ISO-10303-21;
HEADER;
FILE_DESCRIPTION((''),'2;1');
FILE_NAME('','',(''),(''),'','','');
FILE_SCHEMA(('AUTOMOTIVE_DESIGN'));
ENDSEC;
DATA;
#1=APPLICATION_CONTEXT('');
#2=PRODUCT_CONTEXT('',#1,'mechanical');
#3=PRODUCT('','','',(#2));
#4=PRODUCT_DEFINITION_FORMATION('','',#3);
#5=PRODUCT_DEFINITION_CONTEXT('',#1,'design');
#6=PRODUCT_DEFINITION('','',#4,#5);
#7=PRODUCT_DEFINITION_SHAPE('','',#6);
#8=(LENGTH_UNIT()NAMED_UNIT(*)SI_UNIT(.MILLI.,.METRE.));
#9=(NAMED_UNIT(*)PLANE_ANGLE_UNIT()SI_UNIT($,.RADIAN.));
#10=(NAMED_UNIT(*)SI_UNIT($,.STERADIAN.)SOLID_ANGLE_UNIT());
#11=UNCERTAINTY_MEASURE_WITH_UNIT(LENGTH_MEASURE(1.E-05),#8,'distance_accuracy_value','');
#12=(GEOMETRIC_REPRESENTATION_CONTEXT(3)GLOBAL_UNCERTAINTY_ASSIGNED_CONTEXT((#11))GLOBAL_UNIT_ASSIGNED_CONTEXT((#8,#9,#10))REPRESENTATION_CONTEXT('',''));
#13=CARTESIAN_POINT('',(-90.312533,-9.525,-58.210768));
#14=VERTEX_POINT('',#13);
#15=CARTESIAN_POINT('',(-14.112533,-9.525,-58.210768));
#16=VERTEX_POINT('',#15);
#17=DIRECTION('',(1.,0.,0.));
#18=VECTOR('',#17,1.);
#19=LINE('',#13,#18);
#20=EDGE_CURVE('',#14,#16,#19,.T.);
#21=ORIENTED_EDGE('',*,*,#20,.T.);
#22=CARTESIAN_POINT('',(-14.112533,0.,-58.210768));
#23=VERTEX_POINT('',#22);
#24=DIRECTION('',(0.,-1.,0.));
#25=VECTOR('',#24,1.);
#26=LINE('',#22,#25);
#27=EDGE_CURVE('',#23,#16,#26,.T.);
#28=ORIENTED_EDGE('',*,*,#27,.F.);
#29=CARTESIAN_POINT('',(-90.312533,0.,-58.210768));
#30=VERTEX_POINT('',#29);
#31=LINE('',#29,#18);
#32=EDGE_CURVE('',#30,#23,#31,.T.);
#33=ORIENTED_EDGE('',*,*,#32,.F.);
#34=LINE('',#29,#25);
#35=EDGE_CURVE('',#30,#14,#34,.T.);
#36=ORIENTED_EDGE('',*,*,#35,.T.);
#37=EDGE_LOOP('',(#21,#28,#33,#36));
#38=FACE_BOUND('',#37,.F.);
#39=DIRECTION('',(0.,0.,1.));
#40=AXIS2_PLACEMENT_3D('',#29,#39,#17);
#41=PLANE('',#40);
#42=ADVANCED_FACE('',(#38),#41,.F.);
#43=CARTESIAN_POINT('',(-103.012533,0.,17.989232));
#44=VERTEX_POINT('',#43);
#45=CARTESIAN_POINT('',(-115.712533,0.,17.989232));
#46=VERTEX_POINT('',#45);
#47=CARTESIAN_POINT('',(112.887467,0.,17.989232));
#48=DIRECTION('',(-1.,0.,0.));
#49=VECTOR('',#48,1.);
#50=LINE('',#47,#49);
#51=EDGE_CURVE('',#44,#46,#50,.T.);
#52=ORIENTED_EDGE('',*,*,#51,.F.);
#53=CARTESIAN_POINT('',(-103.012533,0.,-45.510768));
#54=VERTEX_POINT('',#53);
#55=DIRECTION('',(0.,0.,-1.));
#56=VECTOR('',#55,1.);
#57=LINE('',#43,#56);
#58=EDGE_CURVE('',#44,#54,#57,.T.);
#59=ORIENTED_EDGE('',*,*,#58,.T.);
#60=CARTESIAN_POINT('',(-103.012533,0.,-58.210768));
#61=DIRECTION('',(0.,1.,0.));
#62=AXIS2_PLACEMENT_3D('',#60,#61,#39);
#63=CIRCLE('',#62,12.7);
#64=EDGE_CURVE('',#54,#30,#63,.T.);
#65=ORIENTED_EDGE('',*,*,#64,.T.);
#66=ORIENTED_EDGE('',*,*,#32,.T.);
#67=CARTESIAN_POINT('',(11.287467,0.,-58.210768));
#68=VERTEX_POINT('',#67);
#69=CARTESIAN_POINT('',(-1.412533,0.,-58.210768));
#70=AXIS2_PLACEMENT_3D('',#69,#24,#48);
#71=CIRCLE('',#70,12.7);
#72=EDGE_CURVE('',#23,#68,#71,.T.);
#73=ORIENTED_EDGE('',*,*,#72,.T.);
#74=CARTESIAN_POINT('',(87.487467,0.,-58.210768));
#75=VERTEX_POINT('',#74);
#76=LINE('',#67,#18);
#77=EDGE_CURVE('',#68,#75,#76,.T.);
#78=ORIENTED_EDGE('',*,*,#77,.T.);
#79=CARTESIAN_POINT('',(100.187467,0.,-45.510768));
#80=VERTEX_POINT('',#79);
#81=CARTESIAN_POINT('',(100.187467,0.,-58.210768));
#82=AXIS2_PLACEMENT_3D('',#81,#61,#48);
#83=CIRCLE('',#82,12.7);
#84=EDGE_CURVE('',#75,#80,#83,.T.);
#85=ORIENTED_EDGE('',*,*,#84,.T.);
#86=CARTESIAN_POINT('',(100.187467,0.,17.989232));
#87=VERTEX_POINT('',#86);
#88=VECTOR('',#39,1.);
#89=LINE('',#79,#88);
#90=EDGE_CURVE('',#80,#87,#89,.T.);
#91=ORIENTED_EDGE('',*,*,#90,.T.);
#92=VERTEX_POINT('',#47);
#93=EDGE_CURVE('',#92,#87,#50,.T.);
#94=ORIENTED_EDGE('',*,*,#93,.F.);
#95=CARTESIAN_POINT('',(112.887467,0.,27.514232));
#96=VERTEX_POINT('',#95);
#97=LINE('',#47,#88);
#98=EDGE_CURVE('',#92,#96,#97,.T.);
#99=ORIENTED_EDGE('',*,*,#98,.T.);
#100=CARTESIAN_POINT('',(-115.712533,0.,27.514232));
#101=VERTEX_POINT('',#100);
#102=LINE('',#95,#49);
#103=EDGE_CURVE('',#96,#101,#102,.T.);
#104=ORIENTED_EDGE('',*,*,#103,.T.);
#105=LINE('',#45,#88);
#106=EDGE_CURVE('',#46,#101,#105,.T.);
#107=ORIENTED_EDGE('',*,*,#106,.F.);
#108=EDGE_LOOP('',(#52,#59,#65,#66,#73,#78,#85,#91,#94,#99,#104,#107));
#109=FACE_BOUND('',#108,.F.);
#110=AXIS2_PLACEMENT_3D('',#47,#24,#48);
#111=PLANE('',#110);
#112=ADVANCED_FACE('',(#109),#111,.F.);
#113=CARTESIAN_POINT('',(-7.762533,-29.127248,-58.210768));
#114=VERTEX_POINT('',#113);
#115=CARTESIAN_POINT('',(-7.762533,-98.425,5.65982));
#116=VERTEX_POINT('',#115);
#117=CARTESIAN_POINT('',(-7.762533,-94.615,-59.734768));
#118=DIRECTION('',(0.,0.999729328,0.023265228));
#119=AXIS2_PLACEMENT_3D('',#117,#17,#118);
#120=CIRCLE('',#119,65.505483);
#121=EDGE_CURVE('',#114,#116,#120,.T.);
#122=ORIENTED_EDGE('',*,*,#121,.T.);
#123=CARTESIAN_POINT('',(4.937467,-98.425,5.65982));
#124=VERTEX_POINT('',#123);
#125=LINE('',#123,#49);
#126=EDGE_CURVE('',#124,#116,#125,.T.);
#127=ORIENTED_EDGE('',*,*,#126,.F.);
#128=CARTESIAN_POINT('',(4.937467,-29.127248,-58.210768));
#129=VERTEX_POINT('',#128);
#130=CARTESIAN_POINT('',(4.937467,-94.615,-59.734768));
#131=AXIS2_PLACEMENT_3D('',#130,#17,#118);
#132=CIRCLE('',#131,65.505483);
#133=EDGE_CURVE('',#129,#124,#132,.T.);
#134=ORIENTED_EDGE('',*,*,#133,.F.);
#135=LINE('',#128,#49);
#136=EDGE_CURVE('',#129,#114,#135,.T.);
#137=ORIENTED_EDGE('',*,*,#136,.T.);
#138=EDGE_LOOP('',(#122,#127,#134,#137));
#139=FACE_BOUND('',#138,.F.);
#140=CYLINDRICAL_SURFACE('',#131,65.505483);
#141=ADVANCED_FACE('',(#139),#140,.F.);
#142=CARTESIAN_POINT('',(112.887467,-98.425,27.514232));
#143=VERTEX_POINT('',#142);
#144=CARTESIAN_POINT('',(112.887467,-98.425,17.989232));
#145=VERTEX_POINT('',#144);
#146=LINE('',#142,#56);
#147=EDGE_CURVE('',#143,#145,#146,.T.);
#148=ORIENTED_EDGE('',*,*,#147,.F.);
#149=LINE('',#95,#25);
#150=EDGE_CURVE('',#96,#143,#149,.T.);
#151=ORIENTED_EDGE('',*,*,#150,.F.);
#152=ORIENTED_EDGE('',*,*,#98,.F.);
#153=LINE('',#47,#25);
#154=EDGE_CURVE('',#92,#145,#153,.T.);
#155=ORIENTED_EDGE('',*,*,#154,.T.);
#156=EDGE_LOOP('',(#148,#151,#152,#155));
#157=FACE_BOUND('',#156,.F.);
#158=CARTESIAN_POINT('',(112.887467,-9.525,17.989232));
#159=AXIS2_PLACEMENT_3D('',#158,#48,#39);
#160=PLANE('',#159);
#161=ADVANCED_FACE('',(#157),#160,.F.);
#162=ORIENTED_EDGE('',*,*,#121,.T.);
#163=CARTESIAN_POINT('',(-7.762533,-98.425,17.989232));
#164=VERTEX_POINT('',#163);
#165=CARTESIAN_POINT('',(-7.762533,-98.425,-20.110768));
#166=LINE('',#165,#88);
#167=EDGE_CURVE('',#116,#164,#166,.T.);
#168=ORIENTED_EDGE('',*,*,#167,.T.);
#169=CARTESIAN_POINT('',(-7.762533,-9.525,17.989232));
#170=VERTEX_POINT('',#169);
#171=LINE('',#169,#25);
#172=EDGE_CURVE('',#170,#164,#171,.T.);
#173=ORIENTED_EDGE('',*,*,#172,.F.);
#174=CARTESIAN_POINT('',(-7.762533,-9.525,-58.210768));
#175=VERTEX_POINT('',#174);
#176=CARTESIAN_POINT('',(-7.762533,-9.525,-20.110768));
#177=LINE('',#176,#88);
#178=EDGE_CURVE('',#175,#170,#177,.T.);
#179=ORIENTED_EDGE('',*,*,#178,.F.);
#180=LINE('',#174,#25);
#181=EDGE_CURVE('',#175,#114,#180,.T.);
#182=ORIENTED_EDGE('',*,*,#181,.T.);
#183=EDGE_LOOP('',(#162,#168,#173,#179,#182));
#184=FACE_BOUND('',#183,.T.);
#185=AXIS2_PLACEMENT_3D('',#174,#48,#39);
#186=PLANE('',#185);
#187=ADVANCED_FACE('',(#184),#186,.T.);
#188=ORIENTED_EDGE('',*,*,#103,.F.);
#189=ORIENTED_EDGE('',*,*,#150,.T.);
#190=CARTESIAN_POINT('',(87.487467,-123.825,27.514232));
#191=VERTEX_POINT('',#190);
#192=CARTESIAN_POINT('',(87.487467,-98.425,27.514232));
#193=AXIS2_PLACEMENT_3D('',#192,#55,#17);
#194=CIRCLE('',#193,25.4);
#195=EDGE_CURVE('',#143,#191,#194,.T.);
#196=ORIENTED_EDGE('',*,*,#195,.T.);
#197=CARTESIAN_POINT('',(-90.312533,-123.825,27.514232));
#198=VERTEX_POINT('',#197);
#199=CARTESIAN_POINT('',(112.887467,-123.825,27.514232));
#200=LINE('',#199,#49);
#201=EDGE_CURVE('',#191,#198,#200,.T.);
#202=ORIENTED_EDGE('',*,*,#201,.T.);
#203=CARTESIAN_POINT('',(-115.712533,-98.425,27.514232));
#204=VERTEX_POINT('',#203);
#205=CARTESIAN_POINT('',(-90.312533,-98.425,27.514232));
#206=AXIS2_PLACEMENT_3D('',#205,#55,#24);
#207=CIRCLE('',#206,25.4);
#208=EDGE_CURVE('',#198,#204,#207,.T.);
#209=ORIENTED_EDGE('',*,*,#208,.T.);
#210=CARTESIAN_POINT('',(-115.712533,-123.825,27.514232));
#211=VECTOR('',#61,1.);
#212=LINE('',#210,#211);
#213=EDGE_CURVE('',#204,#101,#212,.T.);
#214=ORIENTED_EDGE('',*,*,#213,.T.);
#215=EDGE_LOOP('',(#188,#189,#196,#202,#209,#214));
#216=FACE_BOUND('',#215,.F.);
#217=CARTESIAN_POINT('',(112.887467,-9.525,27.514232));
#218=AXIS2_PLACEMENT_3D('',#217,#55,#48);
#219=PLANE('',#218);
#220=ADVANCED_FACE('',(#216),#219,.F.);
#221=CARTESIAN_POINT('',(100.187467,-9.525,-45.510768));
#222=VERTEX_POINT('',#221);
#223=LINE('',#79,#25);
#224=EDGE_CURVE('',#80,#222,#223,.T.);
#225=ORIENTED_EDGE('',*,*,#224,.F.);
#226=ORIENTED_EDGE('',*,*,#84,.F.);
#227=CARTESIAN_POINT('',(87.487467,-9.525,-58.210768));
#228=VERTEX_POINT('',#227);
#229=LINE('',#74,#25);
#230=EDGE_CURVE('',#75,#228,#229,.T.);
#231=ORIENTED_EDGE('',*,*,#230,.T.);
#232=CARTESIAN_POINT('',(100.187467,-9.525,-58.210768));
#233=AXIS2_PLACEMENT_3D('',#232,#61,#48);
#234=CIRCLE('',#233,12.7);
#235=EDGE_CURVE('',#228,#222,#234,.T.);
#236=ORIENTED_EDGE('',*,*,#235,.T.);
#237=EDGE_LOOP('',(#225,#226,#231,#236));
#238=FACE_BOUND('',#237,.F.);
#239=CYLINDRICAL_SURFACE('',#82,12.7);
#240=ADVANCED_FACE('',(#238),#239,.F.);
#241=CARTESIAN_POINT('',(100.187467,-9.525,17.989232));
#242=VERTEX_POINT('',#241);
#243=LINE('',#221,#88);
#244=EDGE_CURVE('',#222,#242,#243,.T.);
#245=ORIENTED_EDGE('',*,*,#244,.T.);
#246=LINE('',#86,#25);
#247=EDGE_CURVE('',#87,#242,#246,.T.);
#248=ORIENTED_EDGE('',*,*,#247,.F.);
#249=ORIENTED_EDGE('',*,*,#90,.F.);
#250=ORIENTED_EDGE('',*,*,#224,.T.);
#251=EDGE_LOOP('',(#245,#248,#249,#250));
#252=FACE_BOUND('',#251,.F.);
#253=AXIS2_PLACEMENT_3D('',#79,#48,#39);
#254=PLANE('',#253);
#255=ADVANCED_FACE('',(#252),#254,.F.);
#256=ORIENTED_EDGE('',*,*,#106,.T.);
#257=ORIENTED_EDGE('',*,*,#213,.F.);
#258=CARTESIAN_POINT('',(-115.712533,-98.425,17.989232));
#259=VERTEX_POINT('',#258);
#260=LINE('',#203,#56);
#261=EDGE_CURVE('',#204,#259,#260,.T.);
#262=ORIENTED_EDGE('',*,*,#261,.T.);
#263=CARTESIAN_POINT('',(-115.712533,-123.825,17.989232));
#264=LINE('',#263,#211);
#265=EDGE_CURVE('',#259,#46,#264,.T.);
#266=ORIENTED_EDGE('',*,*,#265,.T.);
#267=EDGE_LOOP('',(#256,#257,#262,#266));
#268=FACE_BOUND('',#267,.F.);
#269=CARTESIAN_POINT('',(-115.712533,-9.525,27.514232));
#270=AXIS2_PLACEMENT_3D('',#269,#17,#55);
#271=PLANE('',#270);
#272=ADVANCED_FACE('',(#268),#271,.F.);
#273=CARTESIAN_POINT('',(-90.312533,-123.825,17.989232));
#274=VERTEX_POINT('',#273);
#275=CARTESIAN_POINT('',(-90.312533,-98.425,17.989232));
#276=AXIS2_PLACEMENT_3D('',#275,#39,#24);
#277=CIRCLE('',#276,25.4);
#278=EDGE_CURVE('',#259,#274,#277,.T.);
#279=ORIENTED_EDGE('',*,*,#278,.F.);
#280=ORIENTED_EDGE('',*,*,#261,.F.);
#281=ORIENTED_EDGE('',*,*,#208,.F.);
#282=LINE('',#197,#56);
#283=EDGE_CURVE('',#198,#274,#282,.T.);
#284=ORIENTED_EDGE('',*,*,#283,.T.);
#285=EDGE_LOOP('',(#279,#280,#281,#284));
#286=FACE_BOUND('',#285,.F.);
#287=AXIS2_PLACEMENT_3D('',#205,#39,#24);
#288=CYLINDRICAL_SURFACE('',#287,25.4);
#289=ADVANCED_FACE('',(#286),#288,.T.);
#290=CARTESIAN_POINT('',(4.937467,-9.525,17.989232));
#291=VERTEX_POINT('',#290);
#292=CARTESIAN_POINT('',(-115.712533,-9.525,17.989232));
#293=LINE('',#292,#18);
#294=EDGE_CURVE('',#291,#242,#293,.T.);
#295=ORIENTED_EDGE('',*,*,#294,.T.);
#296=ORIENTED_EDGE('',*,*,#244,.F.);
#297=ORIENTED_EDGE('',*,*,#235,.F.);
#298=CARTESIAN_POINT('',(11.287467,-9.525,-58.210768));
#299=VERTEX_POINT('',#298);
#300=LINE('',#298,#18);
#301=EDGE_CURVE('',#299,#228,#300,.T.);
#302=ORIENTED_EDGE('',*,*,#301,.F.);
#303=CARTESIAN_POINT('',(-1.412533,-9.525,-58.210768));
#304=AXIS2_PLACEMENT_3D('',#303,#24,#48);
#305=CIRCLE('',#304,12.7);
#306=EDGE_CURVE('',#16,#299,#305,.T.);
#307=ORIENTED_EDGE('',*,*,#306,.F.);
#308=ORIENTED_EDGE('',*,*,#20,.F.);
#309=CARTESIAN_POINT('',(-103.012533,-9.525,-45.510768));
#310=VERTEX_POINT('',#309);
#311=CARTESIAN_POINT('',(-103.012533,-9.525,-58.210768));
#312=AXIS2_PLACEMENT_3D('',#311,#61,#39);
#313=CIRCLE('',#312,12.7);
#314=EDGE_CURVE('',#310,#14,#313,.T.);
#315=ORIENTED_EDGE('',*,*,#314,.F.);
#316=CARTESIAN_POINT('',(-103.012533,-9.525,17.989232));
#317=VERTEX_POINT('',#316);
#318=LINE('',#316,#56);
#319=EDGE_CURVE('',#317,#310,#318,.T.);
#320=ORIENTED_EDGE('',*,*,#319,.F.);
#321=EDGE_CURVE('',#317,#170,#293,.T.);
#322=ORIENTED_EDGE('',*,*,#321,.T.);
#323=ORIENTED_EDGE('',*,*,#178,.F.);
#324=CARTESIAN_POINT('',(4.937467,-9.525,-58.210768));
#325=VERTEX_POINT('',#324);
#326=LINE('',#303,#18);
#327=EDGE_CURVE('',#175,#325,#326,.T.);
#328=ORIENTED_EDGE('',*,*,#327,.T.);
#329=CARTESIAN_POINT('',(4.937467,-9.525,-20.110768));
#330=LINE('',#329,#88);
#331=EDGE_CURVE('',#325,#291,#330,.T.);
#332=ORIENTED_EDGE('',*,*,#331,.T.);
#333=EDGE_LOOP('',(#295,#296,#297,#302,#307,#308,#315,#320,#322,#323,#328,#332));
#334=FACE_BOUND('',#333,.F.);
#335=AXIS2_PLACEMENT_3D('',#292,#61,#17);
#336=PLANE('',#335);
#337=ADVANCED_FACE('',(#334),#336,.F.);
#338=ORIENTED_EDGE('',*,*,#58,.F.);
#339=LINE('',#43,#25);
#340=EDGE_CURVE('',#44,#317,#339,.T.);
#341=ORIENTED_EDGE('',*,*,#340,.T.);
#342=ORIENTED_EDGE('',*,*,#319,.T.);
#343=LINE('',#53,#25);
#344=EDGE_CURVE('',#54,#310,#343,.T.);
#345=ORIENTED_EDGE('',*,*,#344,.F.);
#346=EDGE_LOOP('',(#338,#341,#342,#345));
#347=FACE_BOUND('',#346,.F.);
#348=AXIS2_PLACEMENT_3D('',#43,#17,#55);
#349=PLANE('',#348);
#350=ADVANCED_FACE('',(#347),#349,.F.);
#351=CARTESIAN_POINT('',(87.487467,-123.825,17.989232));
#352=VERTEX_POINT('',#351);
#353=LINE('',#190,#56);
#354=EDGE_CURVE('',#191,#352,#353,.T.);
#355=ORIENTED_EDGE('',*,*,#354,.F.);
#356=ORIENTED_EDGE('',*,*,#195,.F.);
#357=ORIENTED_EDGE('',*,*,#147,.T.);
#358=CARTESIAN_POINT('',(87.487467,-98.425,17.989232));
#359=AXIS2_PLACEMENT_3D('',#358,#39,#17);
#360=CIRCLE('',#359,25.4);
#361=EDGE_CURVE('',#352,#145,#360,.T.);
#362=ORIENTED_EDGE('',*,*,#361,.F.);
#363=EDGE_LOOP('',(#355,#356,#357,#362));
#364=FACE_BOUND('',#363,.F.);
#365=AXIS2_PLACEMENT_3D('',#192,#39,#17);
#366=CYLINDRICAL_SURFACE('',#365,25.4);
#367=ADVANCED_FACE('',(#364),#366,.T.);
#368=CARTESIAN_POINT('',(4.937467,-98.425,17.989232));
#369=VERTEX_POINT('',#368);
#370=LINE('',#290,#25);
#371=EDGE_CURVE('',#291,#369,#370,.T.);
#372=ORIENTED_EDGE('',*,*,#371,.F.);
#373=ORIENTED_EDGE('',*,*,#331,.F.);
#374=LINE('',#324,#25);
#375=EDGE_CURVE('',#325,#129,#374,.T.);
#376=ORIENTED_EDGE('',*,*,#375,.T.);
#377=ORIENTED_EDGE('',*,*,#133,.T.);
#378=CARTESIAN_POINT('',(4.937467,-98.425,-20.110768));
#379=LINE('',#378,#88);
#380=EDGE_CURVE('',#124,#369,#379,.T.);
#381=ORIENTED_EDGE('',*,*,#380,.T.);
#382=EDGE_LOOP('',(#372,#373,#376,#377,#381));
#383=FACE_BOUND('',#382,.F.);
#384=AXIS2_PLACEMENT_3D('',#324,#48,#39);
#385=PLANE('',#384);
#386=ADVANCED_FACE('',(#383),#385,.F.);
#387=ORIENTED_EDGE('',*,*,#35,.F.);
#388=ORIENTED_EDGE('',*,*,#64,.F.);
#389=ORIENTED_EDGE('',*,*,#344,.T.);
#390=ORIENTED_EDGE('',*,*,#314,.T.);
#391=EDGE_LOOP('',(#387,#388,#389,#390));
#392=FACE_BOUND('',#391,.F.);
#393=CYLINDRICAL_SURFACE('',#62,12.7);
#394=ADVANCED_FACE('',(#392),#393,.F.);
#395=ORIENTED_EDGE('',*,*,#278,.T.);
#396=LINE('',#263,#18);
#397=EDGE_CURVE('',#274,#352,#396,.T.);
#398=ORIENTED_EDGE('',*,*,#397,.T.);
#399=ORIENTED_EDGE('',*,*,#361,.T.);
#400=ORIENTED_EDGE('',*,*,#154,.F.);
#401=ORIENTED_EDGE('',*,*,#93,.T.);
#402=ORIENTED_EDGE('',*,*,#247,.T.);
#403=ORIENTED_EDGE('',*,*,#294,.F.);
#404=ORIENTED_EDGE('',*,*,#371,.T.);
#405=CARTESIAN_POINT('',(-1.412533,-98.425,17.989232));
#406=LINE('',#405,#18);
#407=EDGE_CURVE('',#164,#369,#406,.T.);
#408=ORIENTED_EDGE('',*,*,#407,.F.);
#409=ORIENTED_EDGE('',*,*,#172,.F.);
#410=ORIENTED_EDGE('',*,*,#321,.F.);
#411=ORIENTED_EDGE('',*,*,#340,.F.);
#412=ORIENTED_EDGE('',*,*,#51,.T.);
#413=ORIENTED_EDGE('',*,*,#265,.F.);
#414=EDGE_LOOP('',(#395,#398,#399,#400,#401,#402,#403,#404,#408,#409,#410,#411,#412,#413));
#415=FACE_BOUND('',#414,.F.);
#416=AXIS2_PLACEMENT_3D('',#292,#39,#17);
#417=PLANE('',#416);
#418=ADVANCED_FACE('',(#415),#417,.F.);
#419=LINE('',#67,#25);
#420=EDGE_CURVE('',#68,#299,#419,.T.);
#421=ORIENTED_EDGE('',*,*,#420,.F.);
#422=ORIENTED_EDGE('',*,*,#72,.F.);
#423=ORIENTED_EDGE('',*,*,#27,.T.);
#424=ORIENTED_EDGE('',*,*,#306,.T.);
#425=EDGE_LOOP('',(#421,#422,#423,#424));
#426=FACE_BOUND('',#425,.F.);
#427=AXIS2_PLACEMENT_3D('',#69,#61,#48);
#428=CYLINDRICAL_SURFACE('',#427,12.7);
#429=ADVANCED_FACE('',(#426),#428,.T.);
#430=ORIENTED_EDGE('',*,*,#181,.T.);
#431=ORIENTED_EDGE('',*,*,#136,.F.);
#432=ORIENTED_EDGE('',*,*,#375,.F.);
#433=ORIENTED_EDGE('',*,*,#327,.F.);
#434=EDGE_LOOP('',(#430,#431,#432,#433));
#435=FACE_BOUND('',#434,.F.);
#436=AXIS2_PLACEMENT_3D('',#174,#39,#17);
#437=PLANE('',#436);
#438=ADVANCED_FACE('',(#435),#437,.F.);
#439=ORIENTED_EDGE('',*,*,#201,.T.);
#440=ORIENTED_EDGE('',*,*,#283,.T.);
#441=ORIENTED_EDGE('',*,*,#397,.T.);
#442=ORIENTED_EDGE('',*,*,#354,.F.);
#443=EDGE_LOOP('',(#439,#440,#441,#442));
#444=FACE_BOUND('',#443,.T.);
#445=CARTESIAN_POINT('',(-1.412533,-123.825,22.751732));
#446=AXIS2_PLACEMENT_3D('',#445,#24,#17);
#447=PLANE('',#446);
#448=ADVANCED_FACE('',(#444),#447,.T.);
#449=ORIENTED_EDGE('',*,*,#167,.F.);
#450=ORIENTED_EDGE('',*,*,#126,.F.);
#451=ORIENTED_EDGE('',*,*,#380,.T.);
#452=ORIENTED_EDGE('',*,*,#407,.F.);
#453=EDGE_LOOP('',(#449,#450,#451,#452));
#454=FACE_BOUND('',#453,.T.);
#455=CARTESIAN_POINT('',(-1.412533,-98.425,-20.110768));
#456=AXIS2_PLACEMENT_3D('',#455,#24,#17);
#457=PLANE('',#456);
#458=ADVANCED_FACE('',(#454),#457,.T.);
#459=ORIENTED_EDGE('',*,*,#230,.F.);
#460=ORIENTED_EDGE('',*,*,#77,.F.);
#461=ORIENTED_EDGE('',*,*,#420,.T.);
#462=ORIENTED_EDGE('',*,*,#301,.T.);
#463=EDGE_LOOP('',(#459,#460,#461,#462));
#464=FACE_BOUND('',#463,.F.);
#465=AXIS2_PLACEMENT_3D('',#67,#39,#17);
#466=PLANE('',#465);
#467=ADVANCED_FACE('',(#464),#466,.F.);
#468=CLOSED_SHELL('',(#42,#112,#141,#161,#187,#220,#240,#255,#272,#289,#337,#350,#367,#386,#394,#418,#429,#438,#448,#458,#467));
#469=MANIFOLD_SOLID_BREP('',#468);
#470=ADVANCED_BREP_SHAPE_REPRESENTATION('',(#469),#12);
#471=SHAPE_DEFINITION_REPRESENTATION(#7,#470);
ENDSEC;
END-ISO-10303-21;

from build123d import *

# Parameters (mm, degrees)
F1_DEPTH  = 9.525
F2_W      = 12.7
F2_H      = 9.525
F2_W_2    = 203.2
F3_DEPTH  = 9.525
F5_DEPTH  = 114.3
F7_DEPTH  = 9.652
F8_DEPTH  = 25.4
F9_W      = 12.7
F9_H      = 76.2
F10_DEPTH = 88.9
F12_DEPTH = 25.4


with BuildPart() as f1:
    # F0 (on Front) → F1 (new body)
    with BuildSketch(Plane.XZ):
        with BuildLine():
            Line((100.1874667764, 17.9892315423), (-103.0125332236, 17.9892315423))
            Line((-103.0125332236, 17.9892315423), (-103.0125332236, -45.5107684577))
            ThreePointArc((-103.0125332236, -45.5107684577), (-94.0322771026, -49.2305123366), (-90.3125332236, -58.2107684577))
            Line((-90.3125332236, -58.2107684577), (-14.1125332236, -58.2107684577))
            ThreePointArc((-14.1125332236, -58.2107684577), (-1.4125332236, -70.9107684577), (11.2874667764, -58.2107684577))
            Line((11.2874667764, -58.2107684577), (87.4874667764, -58.2107684577))
            ThreePointArc((87.4874667764, -58.2107684577), (91.2072106553, -49.2305123366), (100.1874667764, -45.5107684577))
            Line((100.1874667764, -45.5107684577), (100.1874667764, 17.9892315423))
        make_face()
    extrude(amount=F1_DEPTH)

    # F2 (on face) → F3 (join)
    with BuildSketch(Plane.XY.offset(17.9892315423)):
        with Locations((-109.3625332236, -4.7625)):
            Rectangle(F2_W, F2_H)
        with Locations((-1.4125332236, -4.7625)):
            Rectangle(F2_W_2, F2_H)
        with Locations((106.5374667764, -4.7625)):
            Rectangle(F2_W, F2_H)
    extrude(amount=F3_DEPTH)

    # F4 (on face) → F5 (join)
    with BuildSketch(Plane.XZ.offset(9.525)):
        Polygon((-115.7125332236, 17.9892315423), (-103.0125332236, 17.9892315423), (100.1874667764, 17.9892315423), (112.8874667764, 17.9892315423), (112.8874667764, 27.5142315423), (-115.7125332236, 27.5142315423), align=None)
    extrude(amount=F5_DEPTH)

    # F6 (on face) → F7 (cut)
    with BuildSketch(Plane.XY.offset(27.5142315423)):
        with BuildLine():
            ThreePointArc((-90.3125332236, -123.825), (-108.2730454658, -116.3855122421), (-115.7125332236, -98.425))
            Line((-115.7125332236, -98.425), (-115.7125332236, -123.825))
            Line((-115.7125332236, -123.825), (-90.3125332236, -123.825))
        make_face()
    extrude(amount=-F7_DEPTH, mode=Mode.SUBTRACT)

    # F6 (on face) → F8 (cut)
    with BuildSketch(Plane.XY.offset(27.5142315423)):
        with BuildLine():
            Line((112.8874667764, -123.825), (112.8874667764, -98.425))
            ThreePointArc((112.8874667764, -98.425), (105.4479790185, -116.3855122421), (87.4874667764, -123.825))
            Line((87.4874667764, -123.825), (112.8874667764, -123.825))
        make_face()
    extrude(amount=-F8_DEPTH, mode=Mode.SUBTRACT)

    # F9 (on face) → F10 (join)
    with BuildSketch(Plane.XZ.offset(9.525)):
        with Locations((-1.4125332236, -20.1107684577)):
            Rectangle(F9_W, F9_H)
    extrude(amount=F10_DEPTH)

    # F11 (on face) → F12 (cut)
    with BuildSketch(Plane.YZ.offset(4.9374667764)):
        with BuildLine():
            ThreePointArc((-29.1272475292, -58.2107684577), (-50.2201883101, -11.5676739355), (-98.425, 5.659820001))
            Line((-98.425, 5.659820001), (-98.425, 5.2892315423))
            Line((-98.425, 5.2892315423), (-98.425, -58.2107684577))
            Line((-98.425, -58.2107684577), (-29.1272475292, -58.2107684577))
        make_face()
    extrude(amount=-F12_DEPTH, mode=Mode.SUBTRACT)


solid = f1.part
